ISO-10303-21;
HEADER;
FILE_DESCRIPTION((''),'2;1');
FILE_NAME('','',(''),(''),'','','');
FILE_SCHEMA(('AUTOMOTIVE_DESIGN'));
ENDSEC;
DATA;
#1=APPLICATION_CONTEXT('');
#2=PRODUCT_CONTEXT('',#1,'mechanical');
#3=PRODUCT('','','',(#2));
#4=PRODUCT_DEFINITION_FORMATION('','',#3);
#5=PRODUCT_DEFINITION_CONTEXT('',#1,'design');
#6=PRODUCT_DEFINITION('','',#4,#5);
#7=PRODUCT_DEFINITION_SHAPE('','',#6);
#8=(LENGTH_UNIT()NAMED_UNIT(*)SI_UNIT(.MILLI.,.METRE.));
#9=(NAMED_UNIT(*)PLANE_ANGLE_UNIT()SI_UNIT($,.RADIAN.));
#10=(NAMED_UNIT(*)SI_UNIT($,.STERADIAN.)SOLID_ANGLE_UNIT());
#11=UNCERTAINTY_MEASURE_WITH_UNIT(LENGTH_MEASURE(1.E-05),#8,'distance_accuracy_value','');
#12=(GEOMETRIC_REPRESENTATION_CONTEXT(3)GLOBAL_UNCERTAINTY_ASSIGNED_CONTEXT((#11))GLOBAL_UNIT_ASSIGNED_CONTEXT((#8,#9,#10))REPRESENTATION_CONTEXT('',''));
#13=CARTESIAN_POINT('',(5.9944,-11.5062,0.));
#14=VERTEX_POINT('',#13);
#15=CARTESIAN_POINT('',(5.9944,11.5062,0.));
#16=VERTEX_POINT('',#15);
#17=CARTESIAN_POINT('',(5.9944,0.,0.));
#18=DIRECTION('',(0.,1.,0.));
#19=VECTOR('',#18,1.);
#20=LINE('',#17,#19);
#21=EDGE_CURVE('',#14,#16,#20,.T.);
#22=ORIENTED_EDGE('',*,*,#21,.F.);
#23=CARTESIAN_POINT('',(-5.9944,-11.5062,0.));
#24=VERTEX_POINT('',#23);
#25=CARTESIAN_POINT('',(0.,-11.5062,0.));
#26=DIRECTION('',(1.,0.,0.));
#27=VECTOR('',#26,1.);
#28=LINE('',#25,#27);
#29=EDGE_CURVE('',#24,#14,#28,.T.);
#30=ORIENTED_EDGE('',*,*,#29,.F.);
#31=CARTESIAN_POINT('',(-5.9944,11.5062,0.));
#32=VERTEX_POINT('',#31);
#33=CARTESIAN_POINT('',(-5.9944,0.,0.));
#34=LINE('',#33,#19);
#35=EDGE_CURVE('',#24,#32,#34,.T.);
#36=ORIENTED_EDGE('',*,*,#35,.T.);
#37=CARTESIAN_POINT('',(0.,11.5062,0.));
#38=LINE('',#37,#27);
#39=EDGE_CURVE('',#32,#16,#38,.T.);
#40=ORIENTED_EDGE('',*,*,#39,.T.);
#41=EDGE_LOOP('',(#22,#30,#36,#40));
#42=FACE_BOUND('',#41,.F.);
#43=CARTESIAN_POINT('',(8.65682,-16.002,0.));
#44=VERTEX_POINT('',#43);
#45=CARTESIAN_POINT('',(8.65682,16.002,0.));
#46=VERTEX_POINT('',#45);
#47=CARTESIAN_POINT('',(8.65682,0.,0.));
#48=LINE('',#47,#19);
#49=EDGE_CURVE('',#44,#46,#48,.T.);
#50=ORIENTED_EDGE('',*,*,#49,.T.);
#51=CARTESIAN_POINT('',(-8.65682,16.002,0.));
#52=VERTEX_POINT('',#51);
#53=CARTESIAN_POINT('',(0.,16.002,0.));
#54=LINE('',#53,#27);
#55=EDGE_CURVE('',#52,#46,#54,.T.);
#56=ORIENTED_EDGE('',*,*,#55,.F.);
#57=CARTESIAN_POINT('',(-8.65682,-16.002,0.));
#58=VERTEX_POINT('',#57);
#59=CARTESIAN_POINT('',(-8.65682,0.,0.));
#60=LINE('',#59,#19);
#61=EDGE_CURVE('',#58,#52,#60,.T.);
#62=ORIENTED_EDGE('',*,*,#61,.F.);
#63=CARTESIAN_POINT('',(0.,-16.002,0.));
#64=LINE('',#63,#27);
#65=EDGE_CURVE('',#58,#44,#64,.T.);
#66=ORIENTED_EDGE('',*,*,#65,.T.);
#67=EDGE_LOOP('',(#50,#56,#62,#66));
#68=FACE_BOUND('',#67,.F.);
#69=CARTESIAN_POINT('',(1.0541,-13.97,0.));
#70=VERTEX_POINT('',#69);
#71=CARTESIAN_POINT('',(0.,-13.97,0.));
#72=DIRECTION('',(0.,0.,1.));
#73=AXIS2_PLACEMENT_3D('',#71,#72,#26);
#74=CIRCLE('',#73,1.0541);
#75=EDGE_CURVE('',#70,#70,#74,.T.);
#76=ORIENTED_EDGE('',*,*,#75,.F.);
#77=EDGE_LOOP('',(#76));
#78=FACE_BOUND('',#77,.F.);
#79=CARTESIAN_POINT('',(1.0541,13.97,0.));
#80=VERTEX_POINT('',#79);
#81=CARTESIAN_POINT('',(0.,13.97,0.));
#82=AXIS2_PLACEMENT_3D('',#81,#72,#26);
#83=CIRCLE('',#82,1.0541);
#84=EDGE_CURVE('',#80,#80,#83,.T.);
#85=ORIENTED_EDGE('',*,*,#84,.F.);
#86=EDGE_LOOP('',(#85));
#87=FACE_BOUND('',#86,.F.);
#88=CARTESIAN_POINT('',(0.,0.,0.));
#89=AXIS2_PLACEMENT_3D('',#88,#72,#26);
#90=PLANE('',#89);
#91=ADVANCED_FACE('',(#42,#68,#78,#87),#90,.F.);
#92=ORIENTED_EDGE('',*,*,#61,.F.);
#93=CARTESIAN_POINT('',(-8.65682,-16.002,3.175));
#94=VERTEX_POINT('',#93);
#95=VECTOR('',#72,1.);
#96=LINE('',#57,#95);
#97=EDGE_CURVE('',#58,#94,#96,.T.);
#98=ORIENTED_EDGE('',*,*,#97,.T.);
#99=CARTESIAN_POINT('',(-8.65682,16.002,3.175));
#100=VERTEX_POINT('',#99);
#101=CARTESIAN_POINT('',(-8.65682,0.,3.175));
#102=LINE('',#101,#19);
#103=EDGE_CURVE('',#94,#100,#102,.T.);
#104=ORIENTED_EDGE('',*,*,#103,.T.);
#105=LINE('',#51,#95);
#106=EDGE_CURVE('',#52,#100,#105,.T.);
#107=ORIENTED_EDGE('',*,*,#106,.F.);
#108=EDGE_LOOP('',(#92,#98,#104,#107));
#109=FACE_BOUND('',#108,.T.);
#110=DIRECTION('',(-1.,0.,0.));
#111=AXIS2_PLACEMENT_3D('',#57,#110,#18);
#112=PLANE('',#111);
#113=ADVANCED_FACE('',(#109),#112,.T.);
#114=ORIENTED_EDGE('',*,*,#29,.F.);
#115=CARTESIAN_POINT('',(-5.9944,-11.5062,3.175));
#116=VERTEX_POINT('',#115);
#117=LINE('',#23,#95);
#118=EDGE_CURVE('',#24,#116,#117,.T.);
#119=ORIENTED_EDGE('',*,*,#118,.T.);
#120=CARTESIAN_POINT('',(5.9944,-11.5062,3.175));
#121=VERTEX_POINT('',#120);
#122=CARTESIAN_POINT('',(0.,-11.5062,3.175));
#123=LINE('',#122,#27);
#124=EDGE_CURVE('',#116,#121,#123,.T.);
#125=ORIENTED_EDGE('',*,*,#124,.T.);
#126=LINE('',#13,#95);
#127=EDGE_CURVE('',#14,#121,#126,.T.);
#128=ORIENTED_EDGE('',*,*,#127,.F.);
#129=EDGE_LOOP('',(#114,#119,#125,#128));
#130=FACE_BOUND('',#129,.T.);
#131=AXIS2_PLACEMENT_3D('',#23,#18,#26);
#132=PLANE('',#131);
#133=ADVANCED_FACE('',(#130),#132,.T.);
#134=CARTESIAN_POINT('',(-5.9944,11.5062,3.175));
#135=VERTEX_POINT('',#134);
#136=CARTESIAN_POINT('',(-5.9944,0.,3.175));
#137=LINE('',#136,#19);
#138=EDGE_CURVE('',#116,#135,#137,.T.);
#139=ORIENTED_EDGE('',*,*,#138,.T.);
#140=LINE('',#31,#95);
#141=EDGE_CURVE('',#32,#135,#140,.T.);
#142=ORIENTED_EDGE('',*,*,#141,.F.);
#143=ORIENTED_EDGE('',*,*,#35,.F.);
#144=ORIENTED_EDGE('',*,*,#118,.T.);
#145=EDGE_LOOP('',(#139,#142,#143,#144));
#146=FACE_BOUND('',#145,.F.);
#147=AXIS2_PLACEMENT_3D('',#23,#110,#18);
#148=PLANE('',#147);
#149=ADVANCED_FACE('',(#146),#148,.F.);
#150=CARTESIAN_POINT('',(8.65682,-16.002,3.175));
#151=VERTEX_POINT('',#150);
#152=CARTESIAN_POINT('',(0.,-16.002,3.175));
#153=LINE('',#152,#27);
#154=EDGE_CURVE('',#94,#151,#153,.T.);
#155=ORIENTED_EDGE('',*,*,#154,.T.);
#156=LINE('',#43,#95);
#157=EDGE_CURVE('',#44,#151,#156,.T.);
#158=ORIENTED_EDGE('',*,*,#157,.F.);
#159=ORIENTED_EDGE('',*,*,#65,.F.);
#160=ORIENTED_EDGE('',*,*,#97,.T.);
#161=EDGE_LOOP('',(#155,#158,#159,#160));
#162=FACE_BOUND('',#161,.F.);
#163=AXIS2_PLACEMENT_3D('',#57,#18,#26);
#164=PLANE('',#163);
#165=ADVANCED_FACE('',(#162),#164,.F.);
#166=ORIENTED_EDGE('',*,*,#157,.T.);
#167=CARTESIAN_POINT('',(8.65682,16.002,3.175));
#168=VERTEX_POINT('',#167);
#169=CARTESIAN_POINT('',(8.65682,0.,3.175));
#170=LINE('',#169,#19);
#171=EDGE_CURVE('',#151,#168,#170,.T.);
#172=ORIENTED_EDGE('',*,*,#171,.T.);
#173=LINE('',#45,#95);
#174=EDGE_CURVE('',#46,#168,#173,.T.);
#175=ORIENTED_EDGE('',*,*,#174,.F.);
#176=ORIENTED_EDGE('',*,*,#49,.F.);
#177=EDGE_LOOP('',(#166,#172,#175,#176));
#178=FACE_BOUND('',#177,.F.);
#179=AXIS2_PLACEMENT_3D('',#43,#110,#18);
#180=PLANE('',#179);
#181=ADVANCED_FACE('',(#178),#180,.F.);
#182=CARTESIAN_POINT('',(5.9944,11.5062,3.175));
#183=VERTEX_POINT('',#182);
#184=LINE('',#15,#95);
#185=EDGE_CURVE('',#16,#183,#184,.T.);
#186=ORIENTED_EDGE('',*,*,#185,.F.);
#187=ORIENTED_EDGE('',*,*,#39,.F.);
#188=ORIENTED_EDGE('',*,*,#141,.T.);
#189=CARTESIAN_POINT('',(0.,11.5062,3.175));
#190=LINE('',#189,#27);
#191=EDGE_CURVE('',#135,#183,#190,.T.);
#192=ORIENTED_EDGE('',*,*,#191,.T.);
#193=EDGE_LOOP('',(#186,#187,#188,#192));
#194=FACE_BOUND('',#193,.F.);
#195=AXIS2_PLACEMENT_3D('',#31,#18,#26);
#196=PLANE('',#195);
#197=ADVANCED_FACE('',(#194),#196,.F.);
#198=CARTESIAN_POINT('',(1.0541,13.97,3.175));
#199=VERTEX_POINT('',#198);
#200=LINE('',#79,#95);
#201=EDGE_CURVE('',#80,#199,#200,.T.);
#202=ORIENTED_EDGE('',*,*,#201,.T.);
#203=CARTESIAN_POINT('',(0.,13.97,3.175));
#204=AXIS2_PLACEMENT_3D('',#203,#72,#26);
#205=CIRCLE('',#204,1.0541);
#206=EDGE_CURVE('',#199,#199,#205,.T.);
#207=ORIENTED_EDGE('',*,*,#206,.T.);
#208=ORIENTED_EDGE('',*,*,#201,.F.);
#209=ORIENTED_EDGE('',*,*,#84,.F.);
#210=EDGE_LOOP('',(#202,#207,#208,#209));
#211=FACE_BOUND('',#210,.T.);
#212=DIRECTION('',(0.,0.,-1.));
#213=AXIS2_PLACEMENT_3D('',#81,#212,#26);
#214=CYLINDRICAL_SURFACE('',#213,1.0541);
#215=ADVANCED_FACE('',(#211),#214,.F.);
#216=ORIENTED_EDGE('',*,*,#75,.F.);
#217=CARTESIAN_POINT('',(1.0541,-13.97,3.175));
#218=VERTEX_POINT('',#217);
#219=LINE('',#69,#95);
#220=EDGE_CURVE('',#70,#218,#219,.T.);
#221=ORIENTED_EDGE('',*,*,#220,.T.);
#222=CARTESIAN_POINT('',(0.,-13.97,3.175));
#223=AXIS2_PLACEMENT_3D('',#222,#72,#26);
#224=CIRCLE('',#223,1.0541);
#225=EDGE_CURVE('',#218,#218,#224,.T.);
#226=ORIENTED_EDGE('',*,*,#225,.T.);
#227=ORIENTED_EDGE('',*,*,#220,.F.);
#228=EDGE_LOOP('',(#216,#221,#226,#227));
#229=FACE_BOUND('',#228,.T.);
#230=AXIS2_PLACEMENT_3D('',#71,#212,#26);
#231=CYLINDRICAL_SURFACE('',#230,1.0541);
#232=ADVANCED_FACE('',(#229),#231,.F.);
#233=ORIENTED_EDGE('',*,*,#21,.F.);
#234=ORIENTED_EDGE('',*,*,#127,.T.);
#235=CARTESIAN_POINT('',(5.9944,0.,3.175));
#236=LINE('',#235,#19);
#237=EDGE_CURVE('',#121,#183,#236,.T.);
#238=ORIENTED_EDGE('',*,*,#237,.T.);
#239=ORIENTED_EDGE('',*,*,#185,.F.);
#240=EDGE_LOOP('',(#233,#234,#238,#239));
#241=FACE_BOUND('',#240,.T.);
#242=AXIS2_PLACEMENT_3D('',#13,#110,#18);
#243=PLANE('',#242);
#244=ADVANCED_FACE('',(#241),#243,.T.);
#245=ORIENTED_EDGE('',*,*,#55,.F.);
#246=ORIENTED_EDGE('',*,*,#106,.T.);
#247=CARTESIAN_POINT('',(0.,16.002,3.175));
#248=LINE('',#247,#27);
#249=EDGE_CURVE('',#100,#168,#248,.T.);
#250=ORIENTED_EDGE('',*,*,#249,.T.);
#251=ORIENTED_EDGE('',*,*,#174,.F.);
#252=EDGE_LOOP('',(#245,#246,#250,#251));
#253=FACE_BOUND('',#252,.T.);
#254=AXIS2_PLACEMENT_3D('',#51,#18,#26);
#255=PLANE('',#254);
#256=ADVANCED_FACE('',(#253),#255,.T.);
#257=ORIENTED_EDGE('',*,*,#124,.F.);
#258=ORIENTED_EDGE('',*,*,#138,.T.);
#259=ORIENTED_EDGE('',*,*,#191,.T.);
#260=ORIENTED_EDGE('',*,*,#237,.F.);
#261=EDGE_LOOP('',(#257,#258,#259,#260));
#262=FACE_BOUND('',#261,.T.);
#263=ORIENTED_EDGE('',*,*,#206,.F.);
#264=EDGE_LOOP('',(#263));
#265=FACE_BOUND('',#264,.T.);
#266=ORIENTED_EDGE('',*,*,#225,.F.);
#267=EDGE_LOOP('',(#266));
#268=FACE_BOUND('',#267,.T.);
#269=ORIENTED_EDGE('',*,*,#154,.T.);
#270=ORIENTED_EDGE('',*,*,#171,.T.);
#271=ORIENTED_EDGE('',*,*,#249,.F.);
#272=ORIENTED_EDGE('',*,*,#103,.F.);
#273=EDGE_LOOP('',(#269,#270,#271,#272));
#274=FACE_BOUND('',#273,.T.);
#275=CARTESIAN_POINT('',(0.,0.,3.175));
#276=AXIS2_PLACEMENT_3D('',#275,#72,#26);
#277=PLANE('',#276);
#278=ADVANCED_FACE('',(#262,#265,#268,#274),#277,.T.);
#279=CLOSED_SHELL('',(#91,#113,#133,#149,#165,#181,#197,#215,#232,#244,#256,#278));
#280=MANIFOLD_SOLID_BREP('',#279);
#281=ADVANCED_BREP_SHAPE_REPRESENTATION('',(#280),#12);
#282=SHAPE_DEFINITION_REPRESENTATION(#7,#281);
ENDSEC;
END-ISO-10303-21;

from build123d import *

# Parameters (mm, degrees)
F0_W     = 17.3136392439
F0_H     = 32.004
F0_R     = 1.0541
F0_W_2   = 11.9888
F0_H_2   = 23.0124
F1_DEPTH = 3.175


# Not quite as in the source:
# - a length typed as a fraction of an inch, garbled in the dataset ("3 / 203.2 mm" for 3/8 in), is restored


with BuildPart() as f1:
    # F0 (on Top) → F1 (new body)
    with BuildSketch(Plane.XY):
        Rectangle(F0_W, F0_H)
        with Locations((0, -13.97)):
            Circle(F0_R, mode=Mode.SUBTRACT)
        Rectangle(F0_W_2, F0_H_2, mode=Mode.SUBTRACT)
        with Locations((0, 13.97)):
            Circle(F0_R, mode=Mode.SUBTRACT)
    extrude(amount=F1_DEPTH)


solid = f1.part
